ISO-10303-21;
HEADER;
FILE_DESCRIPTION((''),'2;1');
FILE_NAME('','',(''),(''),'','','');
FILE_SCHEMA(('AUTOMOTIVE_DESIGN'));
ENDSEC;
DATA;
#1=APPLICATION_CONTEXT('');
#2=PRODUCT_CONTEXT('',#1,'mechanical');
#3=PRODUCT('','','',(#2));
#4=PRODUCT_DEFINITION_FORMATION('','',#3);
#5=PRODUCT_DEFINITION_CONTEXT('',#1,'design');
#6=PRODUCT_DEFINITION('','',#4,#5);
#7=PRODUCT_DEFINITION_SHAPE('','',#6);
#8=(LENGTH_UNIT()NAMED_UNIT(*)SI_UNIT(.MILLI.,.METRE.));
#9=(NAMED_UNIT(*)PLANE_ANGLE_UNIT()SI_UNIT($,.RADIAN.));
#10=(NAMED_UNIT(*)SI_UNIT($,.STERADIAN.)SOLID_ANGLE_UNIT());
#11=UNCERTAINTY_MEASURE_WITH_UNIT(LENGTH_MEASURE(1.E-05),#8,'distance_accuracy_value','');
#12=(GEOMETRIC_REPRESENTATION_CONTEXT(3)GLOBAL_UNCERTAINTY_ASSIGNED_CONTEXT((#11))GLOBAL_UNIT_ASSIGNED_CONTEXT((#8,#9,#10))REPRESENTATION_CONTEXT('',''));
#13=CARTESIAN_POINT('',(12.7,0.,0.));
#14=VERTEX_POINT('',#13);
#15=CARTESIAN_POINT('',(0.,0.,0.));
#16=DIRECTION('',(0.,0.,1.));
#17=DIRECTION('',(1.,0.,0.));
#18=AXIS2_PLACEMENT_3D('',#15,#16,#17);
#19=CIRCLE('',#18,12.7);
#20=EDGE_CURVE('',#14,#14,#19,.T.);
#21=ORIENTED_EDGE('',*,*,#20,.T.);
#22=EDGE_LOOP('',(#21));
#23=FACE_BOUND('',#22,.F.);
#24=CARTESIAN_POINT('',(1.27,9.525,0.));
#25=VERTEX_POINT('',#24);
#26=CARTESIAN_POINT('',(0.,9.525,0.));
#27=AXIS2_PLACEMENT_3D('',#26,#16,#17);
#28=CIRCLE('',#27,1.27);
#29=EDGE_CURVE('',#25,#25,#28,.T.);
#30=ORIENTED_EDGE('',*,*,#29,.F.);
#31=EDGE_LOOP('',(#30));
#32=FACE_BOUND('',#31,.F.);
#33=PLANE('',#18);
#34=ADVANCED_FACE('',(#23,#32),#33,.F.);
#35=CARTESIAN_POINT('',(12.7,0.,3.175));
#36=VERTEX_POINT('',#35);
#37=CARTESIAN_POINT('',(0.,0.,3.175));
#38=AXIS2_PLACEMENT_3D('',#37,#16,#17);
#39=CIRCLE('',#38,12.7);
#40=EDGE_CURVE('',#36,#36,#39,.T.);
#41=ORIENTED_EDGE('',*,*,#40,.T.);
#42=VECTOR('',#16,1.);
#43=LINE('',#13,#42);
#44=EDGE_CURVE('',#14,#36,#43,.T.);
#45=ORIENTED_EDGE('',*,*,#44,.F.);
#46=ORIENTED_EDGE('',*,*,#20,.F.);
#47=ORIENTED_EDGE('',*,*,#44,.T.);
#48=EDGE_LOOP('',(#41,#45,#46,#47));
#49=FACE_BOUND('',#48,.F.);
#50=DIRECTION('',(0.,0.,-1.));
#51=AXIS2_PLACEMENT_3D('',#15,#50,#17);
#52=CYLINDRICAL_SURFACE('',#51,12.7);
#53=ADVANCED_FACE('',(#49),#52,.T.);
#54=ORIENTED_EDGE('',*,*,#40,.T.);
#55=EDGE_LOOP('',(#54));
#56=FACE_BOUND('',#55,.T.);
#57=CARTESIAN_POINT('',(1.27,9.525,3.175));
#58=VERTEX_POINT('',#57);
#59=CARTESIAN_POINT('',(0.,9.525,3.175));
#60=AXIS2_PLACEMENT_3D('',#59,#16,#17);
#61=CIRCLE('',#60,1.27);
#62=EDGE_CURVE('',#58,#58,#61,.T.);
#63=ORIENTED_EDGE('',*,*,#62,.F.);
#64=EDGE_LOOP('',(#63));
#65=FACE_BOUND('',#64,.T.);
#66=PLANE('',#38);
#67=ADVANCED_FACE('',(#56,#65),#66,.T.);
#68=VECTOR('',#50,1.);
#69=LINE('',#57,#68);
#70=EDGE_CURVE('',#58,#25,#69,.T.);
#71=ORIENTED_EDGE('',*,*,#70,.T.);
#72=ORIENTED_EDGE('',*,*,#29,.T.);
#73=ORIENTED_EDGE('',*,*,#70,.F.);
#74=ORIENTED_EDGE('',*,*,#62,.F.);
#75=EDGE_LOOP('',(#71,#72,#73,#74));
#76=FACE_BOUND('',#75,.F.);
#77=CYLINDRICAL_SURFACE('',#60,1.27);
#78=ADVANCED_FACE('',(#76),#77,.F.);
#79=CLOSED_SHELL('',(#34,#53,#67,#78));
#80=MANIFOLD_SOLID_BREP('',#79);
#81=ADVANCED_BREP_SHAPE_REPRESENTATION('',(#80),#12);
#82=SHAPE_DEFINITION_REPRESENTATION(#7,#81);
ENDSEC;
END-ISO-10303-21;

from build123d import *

# Parameters (mm, degrees)
F0_R     = 12.7
F1_DEPTH = 3.175
F2_R     = 1.27
F3_DEPTH = 25.4


# Not quite as in the source:
# - a length typed as a fraction of an inch, garbled in the dataset ("3 / 203.2 mm" for 3/8 in), is restored


with BuildPart() as f1:
    # F0 (on Top) → F1 (new body)
    with BuildSketch(Plane.XY):
        Circle(F0_R)
    extrude(amount=F1_DEPTH)

    # F2 (on face) → F3 (cut)
    with BuildSketch(Plane.XY.offset(3.175)):
        with Locations((0, 9.525)):
            Circle(F2_R)
    extrude(amount=-F3_DEPTH, mode=Mode.SUBTRACT)


solid = f1.part
